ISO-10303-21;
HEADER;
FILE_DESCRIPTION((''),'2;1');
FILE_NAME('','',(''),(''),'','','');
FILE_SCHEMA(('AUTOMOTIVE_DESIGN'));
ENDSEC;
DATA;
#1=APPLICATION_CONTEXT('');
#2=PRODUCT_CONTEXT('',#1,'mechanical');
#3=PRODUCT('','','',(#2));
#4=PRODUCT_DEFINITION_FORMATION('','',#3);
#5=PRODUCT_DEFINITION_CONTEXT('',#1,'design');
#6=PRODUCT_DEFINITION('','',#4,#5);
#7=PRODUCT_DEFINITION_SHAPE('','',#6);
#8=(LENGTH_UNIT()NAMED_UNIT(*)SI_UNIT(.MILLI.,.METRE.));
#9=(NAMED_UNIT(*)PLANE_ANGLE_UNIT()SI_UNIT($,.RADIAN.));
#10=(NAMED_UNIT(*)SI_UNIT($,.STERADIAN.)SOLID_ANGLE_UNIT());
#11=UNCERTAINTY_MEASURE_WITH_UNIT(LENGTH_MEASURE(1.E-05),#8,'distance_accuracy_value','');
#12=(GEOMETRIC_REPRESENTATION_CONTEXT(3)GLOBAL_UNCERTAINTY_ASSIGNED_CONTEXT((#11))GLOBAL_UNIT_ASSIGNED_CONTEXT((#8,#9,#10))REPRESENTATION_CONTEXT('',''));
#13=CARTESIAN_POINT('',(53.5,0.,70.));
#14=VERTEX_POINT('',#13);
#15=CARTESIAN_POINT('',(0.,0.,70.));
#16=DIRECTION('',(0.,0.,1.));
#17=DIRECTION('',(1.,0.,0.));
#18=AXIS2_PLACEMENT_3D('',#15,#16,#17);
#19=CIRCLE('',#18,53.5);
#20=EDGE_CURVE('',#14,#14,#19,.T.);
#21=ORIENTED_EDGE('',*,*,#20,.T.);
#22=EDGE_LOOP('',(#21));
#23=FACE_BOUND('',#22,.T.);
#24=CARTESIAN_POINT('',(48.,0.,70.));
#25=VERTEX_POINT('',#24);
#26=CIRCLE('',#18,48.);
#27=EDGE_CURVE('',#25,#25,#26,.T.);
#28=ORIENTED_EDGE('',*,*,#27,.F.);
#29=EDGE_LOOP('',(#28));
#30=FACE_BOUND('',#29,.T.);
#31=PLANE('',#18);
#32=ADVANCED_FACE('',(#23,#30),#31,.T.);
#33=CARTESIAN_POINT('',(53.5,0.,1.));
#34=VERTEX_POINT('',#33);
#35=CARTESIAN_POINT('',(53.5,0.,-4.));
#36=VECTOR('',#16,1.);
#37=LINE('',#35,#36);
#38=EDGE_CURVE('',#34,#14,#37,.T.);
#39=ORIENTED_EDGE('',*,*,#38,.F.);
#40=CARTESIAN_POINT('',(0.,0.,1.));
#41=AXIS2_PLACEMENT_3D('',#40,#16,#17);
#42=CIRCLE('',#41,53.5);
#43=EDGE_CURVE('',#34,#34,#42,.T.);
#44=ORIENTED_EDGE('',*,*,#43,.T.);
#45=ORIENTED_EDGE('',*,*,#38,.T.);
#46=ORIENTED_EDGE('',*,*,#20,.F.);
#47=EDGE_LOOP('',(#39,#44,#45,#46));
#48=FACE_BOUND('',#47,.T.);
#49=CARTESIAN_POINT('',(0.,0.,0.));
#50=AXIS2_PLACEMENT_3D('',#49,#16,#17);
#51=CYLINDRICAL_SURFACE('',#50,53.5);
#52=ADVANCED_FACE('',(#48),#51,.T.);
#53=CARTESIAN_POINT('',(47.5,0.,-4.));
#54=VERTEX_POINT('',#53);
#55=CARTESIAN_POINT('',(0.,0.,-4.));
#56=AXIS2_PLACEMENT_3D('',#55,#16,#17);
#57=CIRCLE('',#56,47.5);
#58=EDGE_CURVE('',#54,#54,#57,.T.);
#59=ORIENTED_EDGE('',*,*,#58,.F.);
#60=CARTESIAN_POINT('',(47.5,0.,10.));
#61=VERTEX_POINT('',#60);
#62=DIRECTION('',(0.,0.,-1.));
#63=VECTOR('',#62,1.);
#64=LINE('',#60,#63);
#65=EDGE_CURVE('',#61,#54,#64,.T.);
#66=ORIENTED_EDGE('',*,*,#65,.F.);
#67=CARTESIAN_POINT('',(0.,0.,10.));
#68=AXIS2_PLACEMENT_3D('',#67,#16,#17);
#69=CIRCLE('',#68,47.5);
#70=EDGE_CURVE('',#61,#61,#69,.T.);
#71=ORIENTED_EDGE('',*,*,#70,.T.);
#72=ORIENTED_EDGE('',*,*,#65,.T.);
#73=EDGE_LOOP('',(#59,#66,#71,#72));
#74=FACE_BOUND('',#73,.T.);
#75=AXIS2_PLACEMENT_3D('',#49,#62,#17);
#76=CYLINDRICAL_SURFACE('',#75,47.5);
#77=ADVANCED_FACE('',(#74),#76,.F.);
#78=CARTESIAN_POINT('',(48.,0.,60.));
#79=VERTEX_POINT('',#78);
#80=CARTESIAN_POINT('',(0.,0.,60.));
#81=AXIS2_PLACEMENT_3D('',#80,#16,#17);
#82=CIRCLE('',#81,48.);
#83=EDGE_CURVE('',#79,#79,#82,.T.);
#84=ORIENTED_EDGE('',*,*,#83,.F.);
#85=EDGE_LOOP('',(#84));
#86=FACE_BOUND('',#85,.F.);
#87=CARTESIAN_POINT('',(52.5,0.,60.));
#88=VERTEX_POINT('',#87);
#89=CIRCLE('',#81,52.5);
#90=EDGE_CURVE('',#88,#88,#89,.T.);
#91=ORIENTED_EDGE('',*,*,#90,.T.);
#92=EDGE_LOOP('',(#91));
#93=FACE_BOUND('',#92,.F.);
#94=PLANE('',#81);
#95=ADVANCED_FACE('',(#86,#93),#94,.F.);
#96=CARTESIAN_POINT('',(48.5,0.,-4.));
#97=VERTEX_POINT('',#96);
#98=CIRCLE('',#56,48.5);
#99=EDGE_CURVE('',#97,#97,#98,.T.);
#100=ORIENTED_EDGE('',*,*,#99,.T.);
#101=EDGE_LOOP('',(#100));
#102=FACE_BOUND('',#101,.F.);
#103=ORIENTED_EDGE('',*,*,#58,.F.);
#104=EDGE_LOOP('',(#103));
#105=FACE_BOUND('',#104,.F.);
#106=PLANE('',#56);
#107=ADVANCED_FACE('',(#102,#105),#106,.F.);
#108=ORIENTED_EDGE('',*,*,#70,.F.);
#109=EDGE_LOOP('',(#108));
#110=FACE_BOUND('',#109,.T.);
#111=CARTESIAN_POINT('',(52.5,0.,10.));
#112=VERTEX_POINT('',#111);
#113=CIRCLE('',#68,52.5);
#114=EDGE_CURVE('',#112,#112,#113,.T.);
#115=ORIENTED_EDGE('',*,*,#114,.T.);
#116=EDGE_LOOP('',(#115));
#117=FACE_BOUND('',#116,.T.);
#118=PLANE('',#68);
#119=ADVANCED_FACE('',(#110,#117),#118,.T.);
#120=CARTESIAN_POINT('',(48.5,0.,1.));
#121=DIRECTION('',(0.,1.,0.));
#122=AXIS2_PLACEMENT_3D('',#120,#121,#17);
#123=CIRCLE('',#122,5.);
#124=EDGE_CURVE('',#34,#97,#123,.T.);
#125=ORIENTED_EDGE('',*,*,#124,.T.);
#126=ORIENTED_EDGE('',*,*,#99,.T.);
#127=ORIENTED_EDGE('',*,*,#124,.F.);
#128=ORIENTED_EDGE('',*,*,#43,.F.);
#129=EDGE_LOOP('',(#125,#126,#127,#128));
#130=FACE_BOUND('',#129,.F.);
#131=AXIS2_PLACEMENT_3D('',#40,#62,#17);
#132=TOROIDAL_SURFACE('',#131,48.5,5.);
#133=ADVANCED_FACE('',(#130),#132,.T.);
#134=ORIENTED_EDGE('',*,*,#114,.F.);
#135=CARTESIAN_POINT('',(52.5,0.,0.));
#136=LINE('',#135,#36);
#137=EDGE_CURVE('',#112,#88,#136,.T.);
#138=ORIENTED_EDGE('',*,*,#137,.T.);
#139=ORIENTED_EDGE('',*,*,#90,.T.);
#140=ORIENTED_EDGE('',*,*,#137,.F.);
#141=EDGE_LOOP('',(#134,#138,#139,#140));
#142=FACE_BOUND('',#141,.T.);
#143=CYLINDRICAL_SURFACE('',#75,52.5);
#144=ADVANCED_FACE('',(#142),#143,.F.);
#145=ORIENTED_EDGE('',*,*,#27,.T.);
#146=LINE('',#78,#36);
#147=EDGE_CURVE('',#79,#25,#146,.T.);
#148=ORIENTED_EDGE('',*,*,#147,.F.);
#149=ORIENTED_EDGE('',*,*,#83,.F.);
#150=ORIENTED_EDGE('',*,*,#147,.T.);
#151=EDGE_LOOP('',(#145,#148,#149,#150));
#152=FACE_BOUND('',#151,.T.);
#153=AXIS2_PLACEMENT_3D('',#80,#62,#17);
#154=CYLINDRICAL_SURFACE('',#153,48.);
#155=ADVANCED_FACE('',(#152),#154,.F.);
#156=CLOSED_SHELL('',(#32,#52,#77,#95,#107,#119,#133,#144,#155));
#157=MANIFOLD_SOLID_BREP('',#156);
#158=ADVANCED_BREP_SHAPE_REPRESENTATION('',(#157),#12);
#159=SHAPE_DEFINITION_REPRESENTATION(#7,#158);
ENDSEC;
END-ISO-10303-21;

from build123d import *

# Parameters (mm, degrees)
F0_R          = 52.5
F0_R_2        = 50.5
F0_R_3        = 47.5
F1_DEPTH      = 10
F1_DEPTH_BACK = 4
F0_R_4        = 53.5
F2_DEPTH      = 70
F2_DEPTH_BACK = 4
F4_R          = 52.5
F4_R_2        = 48
F5_DEPTH      = 10
F8_R          = 5


# Not quite as in the source:
# - the program builds the solid bodies; features that only make, move or delete a surface that nothing else refers to are left out


with BuildPart() as f1:
    # F0 (on Top) → F1 (new body, two sides)
    with BuildSketch(Plane.XY) as f1_sk:
        Circle(F0_R)
        Circle(F0_R_2, mode=Mode.SUBTRACT)
        Circle(F0_R_2)
        Circle(F0_R_3, mode=Mode.SUBTRACT)
    extrude(amount=F1_DEPTH)
    extrude(f1_sk.sketch, amount=-F1_DEPTH_BACK)

    # F0 (on Top) → F2 (join, two sides)
    with BuildSketch(Plane.XY) as f2_sk:
        Circle(F0_R_4)
        Circle(F0_R, mode=Mode.SUBTRACT)
    extrude(amount=F2_DEPTH)
    extrude(f2_sk.sketch, amount=-F2_DEPTH_BACK)

    # F4 (on offset) → F5 (join)
    with BuildSketch(Plane.XY.offset(60)):
        Circle(F4_R)
        Circle(F4_R_2, mode=Mode.SUBTRACT)
    extrude(amount=F5_DEPTH)

    # F8
    f8_edges = [f1.edges().sort_by_distance(p)[0] for p in [
        (-53.5, 0, -4),
    ]]
    fillet(f8_edges, radius=F8_R)


solid = f1.part
